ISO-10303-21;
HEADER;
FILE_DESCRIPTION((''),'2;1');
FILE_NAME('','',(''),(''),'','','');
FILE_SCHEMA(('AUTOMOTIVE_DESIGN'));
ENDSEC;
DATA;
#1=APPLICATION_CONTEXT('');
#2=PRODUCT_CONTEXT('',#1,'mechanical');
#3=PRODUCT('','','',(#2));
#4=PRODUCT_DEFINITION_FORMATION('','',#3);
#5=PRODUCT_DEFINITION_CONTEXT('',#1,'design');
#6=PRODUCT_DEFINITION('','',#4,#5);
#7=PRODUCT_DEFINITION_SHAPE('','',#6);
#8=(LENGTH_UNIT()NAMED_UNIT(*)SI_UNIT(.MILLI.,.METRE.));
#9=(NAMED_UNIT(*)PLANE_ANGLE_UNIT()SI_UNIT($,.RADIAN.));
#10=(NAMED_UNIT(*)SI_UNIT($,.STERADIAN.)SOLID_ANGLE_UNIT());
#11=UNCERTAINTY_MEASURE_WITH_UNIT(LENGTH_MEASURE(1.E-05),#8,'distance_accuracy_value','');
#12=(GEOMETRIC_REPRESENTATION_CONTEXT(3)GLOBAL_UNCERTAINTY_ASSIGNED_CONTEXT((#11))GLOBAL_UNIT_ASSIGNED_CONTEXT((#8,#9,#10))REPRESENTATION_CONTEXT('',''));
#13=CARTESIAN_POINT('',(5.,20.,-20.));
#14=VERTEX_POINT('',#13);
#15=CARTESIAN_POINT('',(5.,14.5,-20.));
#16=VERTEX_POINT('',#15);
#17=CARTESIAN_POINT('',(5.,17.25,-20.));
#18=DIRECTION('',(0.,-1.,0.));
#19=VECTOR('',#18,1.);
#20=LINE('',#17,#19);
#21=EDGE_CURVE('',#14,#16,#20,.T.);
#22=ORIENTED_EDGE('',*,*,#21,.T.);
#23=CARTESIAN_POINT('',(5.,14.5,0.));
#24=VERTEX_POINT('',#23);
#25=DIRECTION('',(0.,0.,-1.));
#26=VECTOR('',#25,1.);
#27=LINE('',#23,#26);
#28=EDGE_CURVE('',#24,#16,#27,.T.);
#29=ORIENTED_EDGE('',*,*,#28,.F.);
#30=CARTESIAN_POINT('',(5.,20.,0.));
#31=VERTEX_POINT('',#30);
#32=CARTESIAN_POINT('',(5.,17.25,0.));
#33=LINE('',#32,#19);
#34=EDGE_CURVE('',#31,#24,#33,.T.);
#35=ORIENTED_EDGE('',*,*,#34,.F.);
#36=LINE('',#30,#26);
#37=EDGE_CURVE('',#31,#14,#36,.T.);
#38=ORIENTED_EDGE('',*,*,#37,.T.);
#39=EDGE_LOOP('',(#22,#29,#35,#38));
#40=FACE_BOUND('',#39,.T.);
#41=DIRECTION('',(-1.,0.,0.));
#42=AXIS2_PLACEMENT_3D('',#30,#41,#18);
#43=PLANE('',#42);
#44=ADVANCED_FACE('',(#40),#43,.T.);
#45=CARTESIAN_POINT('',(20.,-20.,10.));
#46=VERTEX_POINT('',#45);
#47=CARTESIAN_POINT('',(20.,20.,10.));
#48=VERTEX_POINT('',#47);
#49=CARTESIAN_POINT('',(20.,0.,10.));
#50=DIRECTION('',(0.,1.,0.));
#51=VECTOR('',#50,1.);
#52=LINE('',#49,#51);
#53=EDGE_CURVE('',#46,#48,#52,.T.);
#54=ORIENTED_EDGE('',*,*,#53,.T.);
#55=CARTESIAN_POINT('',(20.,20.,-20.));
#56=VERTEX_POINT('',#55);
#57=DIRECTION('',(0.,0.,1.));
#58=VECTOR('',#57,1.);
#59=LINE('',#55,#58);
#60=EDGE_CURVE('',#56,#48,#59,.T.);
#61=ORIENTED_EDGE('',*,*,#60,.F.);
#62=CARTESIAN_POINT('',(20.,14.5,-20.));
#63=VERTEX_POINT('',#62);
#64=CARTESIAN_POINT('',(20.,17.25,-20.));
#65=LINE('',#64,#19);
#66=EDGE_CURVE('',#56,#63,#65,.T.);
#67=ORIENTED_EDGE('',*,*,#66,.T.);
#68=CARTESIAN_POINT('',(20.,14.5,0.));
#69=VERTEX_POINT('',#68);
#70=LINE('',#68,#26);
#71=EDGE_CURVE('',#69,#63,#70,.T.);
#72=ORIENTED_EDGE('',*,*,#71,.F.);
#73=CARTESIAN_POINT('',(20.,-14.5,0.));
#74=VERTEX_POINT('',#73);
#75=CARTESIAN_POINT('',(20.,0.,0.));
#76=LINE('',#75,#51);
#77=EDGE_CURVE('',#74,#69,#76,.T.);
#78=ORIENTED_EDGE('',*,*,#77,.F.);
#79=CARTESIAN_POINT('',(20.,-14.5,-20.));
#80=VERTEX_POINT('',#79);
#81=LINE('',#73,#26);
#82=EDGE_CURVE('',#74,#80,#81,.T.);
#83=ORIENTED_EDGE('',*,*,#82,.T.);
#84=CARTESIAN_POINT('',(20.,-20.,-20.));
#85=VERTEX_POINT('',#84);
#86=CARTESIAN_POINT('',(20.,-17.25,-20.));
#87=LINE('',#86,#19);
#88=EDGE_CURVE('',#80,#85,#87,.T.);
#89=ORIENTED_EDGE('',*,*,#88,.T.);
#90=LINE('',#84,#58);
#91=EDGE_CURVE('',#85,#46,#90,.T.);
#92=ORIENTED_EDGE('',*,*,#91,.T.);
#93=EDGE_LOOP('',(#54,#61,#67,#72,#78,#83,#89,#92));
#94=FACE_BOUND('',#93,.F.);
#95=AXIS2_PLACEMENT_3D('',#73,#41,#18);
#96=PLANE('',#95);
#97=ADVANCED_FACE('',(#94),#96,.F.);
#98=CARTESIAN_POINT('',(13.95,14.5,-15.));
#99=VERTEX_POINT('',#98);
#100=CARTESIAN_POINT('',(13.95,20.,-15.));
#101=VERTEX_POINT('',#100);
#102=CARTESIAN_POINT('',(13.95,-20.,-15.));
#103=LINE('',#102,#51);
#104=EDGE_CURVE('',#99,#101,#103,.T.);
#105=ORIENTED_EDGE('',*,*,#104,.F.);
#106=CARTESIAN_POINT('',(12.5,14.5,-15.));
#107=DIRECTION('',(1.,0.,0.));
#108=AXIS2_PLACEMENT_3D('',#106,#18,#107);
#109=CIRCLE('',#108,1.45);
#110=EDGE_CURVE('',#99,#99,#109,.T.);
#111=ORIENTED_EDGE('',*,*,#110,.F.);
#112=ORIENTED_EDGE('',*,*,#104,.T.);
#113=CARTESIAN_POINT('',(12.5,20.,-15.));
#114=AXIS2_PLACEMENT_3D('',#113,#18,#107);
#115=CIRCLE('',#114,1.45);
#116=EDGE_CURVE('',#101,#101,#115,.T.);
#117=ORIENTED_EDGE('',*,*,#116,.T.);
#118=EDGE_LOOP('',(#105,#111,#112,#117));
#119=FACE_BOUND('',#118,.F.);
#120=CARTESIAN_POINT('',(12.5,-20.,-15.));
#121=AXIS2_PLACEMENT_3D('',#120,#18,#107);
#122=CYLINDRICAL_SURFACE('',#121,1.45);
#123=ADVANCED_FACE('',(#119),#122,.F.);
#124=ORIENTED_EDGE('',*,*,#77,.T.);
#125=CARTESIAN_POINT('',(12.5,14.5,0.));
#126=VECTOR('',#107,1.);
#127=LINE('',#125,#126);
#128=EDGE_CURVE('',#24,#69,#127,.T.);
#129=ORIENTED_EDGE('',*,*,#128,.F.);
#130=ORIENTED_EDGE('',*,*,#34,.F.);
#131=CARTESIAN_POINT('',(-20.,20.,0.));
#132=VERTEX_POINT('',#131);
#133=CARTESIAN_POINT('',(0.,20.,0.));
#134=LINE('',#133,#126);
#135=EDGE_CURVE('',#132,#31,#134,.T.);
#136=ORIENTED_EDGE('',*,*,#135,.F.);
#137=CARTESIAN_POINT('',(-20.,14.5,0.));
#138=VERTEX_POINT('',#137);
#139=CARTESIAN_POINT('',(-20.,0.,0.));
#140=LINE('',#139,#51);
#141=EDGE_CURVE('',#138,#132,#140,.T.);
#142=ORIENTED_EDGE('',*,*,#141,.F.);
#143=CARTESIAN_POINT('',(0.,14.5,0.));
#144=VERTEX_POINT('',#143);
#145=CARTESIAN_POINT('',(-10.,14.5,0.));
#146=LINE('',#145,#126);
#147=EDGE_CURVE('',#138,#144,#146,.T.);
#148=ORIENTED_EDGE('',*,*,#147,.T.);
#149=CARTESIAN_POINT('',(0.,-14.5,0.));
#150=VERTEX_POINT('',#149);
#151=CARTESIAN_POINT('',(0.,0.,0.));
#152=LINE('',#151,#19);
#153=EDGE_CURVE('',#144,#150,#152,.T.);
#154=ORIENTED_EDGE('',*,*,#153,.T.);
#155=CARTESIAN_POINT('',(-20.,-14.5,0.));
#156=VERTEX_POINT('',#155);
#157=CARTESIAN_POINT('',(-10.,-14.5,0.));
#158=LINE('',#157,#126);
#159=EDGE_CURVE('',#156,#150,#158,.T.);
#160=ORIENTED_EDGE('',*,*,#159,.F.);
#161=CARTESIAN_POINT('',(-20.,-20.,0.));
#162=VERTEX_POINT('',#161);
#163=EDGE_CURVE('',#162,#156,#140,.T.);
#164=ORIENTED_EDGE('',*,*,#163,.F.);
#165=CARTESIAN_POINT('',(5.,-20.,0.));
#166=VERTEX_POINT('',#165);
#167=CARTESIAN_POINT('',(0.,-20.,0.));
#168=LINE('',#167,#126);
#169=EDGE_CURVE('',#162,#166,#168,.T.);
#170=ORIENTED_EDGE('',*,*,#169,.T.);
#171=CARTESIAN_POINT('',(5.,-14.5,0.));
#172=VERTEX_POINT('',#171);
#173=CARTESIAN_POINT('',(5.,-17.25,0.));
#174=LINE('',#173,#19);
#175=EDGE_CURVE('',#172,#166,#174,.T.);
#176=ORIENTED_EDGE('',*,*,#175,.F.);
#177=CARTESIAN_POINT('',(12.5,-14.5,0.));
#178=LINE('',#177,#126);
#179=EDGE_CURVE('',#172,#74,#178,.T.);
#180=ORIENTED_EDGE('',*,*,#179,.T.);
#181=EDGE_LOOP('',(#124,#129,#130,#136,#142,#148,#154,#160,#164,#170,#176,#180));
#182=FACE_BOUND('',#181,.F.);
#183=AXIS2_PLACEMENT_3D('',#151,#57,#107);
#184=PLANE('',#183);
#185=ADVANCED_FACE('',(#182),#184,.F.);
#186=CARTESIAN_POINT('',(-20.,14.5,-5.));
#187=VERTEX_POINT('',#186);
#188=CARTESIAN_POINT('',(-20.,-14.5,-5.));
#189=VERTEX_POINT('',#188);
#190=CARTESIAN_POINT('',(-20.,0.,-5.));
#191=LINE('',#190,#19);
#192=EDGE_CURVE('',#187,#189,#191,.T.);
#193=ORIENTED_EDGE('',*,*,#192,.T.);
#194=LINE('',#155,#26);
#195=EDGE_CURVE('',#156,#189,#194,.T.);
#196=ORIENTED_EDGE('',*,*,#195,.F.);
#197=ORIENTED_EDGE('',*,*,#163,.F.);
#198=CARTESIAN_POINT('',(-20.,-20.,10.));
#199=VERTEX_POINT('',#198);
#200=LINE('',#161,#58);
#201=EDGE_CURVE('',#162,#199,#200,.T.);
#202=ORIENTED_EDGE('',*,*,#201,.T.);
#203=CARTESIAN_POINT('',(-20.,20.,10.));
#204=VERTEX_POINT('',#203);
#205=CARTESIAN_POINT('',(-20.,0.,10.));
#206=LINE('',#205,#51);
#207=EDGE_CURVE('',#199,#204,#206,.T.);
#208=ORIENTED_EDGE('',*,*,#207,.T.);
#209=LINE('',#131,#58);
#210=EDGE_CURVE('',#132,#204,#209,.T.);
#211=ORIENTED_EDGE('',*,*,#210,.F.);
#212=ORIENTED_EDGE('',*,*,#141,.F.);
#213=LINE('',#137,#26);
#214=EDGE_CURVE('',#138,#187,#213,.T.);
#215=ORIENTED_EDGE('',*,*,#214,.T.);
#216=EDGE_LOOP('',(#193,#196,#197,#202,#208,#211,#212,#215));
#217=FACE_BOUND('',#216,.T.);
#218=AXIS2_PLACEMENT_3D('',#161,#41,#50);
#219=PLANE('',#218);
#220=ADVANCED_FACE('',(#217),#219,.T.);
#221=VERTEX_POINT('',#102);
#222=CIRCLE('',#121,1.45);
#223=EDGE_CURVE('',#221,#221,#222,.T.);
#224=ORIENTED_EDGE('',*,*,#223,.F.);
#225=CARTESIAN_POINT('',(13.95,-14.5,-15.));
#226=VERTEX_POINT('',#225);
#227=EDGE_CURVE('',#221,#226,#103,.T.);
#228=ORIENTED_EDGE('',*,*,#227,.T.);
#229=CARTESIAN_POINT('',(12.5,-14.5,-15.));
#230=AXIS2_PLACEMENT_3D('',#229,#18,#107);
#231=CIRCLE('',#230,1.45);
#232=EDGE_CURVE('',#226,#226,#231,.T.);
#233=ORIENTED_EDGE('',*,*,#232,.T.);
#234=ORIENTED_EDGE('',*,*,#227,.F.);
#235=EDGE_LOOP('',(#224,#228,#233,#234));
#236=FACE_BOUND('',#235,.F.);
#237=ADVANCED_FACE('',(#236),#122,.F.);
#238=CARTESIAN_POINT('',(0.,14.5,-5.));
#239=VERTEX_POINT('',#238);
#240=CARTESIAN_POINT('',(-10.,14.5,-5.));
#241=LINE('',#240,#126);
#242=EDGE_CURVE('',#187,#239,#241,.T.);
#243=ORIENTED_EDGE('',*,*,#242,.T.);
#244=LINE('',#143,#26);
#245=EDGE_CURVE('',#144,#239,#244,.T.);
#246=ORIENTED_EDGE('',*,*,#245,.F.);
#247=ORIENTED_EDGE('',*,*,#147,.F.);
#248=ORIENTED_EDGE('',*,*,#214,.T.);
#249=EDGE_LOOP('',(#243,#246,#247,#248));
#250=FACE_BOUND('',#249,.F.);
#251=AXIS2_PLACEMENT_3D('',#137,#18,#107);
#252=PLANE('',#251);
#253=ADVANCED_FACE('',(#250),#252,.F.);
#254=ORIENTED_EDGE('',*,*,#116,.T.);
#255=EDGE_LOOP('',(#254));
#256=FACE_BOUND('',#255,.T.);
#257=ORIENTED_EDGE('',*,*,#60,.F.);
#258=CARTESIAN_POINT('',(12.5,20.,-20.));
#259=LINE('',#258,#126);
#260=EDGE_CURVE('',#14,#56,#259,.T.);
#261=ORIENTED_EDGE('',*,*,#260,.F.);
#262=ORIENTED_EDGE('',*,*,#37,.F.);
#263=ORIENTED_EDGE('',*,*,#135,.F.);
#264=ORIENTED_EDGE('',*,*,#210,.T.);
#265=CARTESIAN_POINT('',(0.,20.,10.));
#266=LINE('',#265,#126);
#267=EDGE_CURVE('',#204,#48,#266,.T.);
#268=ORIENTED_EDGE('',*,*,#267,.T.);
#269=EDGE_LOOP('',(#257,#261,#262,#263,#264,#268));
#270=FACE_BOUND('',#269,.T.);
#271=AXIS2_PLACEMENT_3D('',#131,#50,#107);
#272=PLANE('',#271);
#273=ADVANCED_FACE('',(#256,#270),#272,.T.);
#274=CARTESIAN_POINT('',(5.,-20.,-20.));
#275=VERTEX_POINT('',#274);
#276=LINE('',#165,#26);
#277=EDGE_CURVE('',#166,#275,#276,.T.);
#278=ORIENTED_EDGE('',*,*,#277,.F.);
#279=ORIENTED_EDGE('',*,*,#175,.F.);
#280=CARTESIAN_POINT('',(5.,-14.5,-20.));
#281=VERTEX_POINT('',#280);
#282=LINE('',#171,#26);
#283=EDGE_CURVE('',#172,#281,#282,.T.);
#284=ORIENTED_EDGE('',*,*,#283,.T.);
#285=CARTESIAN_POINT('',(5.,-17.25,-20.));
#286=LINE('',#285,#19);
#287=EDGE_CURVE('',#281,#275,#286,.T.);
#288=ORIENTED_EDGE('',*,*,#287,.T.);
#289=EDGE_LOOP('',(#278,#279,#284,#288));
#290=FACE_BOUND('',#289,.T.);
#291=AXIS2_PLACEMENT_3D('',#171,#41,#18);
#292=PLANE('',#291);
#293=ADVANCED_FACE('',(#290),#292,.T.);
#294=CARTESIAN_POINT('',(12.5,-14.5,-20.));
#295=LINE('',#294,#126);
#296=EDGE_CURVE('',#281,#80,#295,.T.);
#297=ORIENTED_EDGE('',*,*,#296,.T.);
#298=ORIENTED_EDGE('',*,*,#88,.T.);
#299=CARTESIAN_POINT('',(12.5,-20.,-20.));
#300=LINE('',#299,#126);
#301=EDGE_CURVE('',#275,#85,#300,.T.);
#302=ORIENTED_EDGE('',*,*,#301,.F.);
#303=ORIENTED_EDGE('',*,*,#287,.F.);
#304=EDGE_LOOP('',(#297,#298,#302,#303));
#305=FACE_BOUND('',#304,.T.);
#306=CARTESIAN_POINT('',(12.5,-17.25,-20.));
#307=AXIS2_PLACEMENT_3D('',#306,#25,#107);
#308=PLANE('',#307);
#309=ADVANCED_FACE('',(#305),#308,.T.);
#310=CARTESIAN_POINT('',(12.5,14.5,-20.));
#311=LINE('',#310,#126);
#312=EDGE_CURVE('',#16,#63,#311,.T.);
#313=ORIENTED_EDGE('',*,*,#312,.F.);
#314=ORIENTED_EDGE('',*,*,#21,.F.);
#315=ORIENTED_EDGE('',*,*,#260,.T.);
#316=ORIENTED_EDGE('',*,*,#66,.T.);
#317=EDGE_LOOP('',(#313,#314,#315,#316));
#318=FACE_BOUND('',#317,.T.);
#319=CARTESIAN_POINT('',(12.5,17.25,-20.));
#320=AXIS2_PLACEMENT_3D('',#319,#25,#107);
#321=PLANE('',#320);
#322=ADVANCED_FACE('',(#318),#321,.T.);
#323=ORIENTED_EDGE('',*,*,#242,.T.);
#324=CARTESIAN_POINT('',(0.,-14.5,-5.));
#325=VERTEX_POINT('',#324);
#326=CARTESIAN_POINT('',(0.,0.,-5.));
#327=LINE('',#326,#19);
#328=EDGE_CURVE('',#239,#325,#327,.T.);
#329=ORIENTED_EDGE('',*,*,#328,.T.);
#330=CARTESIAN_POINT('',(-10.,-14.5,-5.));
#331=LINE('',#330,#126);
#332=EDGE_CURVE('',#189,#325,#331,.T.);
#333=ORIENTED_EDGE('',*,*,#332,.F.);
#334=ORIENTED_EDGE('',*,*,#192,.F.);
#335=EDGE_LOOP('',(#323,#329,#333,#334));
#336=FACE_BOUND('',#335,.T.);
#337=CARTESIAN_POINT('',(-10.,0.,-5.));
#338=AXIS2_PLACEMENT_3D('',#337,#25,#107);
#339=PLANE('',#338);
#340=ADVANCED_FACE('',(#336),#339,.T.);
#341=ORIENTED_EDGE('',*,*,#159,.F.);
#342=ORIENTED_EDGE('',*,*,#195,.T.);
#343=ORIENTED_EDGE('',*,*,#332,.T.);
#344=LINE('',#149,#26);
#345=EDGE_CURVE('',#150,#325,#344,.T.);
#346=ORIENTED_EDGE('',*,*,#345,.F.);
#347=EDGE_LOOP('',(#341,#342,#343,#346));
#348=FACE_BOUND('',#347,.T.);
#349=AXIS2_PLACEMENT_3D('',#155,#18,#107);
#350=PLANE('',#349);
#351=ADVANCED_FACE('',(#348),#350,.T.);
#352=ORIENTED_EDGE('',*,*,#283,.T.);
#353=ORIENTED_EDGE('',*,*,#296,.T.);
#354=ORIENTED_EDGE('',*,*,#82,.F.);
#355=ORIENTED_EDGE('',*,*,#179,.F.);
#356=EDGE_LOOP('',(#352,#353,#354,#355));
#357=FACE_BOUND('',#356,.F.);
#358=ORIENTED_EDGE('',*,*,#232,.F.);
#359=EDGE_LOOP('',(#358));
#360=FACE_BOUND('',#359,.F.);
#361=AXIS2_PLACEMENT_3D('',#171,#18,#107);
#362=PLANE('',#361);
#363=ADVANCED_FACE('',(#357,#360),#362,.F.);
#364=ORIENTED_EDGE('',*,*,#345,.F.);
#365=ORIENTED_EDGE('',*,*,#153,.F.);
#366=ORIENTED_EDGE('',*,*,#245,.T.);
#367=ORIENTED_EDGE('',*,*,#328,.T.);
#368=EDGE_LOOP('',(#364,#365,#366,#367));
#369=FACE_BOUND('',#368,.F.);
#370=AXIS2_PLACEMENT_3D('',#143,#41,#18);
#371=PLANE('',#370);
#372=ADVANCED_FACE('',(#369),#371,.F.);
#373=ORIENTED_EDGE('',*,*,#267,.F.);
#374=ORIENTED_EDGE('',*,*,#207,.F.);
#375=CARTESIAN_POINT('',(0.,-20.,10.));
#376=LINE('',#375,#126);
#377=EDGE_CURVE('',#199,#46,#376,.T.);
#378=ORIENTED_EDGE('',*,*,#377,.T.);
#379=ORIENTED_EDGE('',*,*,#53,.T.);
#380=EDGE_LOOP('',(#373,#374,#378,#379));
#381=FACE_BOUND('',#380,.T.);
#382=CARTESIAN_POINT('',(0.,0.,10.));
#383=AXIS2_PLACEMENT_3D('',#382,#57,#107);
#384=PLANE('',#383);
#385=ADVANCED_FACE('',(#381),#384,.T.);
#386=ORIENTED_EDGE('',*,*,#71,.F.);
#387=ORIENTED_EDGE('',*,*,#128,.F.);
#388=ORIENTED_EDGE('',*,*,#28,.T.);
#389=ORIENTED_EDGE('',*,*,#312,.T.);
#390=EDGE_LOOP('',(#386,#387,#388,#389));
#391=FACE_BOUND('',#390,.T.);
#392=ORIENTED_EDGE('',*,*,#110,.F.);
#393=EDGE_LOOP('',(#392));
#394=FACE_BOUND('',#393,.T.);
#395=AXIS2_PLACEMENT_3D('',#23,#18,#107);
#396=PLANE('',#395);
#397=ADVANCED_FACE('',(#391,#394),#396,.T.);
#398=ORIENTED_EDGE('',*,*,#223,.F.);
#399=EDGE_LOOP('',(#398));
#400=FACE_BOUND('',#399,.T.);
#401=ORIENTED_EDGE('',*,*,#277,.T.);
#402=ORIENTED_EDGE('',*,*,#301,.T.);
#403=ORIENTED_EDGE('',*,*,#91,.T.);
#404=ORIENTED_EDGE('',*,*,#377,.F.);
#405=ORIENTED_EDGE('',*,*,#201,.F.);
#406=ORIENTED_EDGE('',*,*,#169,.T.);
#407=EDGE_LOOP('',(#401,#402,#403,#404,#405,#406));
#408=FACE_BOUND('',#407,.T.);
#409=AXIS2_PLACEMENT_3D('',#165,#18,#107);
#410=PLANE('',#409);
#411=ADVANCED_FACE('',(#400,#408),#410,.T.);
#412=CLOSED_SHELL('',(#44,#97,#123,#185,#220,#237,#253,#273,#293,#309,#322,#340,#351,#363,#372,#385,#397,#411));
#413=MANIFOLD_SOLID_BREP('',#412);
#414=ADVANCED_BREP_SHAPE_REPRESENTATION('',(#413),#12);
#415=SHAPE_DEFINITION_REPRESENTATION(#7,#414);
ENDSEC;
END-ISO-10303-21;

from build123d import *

# Parameters (mm, degrees)
F0_W     = 40
F0_H     = 40
F1_DEPTH = 10
F2_W     = 20
F2_H     = 29
F3_DEPTH = 5
F4_W     = 15
F4_H     = 5.5
F5_DEPTH = 20
F6_R     = 1.45
F7_DEPTH = 53.2


# Not quite as in the source:
# - a feature names something its author has since deleted; it is built from what else it names


with BuildPart() as f1:
    # F0 (on Top) → F1 (new body)
    with BuildSketch(Plane.XY):
        Rectangle(F0_W, F0_H)
    extrude(amount=F1_DEPTH)

    # F2 (on face) → F3 (join)
    with BuildSketch(Plane(origin=(0, 0, 0), x_dir=(1, 0, 0), z_dir=(0, 0, -1))):
        with Locations((-10, 0)):
            Rectangle(F2_W, F2_H)
    extrude(amount=F3_DEPTH)

    # F4 (on face) → F5 (join)
    with BuildSketch(Plane(origin=(0, 0, 0), x_dir=(1, 0, 0), z_dir=(0, 0, -1))):
        with Locations((12.5, 17.25)):
            Rectangle(F4_W, F4_H)
        with Locations((12.5, -17.25)):
            Rectangle(F4_W, F4_H)
    extrude(amount=F5_DEPTH)

    # F6 (on face) → F7 (cut)
    with BuildSketch(Plane.XZ.offset(20)):
        with Locations((12.5, -15)):
            Circle(F6_R)
    extrude(amount=-F7_DEPTH, mode=Mode.SUBTRACT)


solid = f1.part
